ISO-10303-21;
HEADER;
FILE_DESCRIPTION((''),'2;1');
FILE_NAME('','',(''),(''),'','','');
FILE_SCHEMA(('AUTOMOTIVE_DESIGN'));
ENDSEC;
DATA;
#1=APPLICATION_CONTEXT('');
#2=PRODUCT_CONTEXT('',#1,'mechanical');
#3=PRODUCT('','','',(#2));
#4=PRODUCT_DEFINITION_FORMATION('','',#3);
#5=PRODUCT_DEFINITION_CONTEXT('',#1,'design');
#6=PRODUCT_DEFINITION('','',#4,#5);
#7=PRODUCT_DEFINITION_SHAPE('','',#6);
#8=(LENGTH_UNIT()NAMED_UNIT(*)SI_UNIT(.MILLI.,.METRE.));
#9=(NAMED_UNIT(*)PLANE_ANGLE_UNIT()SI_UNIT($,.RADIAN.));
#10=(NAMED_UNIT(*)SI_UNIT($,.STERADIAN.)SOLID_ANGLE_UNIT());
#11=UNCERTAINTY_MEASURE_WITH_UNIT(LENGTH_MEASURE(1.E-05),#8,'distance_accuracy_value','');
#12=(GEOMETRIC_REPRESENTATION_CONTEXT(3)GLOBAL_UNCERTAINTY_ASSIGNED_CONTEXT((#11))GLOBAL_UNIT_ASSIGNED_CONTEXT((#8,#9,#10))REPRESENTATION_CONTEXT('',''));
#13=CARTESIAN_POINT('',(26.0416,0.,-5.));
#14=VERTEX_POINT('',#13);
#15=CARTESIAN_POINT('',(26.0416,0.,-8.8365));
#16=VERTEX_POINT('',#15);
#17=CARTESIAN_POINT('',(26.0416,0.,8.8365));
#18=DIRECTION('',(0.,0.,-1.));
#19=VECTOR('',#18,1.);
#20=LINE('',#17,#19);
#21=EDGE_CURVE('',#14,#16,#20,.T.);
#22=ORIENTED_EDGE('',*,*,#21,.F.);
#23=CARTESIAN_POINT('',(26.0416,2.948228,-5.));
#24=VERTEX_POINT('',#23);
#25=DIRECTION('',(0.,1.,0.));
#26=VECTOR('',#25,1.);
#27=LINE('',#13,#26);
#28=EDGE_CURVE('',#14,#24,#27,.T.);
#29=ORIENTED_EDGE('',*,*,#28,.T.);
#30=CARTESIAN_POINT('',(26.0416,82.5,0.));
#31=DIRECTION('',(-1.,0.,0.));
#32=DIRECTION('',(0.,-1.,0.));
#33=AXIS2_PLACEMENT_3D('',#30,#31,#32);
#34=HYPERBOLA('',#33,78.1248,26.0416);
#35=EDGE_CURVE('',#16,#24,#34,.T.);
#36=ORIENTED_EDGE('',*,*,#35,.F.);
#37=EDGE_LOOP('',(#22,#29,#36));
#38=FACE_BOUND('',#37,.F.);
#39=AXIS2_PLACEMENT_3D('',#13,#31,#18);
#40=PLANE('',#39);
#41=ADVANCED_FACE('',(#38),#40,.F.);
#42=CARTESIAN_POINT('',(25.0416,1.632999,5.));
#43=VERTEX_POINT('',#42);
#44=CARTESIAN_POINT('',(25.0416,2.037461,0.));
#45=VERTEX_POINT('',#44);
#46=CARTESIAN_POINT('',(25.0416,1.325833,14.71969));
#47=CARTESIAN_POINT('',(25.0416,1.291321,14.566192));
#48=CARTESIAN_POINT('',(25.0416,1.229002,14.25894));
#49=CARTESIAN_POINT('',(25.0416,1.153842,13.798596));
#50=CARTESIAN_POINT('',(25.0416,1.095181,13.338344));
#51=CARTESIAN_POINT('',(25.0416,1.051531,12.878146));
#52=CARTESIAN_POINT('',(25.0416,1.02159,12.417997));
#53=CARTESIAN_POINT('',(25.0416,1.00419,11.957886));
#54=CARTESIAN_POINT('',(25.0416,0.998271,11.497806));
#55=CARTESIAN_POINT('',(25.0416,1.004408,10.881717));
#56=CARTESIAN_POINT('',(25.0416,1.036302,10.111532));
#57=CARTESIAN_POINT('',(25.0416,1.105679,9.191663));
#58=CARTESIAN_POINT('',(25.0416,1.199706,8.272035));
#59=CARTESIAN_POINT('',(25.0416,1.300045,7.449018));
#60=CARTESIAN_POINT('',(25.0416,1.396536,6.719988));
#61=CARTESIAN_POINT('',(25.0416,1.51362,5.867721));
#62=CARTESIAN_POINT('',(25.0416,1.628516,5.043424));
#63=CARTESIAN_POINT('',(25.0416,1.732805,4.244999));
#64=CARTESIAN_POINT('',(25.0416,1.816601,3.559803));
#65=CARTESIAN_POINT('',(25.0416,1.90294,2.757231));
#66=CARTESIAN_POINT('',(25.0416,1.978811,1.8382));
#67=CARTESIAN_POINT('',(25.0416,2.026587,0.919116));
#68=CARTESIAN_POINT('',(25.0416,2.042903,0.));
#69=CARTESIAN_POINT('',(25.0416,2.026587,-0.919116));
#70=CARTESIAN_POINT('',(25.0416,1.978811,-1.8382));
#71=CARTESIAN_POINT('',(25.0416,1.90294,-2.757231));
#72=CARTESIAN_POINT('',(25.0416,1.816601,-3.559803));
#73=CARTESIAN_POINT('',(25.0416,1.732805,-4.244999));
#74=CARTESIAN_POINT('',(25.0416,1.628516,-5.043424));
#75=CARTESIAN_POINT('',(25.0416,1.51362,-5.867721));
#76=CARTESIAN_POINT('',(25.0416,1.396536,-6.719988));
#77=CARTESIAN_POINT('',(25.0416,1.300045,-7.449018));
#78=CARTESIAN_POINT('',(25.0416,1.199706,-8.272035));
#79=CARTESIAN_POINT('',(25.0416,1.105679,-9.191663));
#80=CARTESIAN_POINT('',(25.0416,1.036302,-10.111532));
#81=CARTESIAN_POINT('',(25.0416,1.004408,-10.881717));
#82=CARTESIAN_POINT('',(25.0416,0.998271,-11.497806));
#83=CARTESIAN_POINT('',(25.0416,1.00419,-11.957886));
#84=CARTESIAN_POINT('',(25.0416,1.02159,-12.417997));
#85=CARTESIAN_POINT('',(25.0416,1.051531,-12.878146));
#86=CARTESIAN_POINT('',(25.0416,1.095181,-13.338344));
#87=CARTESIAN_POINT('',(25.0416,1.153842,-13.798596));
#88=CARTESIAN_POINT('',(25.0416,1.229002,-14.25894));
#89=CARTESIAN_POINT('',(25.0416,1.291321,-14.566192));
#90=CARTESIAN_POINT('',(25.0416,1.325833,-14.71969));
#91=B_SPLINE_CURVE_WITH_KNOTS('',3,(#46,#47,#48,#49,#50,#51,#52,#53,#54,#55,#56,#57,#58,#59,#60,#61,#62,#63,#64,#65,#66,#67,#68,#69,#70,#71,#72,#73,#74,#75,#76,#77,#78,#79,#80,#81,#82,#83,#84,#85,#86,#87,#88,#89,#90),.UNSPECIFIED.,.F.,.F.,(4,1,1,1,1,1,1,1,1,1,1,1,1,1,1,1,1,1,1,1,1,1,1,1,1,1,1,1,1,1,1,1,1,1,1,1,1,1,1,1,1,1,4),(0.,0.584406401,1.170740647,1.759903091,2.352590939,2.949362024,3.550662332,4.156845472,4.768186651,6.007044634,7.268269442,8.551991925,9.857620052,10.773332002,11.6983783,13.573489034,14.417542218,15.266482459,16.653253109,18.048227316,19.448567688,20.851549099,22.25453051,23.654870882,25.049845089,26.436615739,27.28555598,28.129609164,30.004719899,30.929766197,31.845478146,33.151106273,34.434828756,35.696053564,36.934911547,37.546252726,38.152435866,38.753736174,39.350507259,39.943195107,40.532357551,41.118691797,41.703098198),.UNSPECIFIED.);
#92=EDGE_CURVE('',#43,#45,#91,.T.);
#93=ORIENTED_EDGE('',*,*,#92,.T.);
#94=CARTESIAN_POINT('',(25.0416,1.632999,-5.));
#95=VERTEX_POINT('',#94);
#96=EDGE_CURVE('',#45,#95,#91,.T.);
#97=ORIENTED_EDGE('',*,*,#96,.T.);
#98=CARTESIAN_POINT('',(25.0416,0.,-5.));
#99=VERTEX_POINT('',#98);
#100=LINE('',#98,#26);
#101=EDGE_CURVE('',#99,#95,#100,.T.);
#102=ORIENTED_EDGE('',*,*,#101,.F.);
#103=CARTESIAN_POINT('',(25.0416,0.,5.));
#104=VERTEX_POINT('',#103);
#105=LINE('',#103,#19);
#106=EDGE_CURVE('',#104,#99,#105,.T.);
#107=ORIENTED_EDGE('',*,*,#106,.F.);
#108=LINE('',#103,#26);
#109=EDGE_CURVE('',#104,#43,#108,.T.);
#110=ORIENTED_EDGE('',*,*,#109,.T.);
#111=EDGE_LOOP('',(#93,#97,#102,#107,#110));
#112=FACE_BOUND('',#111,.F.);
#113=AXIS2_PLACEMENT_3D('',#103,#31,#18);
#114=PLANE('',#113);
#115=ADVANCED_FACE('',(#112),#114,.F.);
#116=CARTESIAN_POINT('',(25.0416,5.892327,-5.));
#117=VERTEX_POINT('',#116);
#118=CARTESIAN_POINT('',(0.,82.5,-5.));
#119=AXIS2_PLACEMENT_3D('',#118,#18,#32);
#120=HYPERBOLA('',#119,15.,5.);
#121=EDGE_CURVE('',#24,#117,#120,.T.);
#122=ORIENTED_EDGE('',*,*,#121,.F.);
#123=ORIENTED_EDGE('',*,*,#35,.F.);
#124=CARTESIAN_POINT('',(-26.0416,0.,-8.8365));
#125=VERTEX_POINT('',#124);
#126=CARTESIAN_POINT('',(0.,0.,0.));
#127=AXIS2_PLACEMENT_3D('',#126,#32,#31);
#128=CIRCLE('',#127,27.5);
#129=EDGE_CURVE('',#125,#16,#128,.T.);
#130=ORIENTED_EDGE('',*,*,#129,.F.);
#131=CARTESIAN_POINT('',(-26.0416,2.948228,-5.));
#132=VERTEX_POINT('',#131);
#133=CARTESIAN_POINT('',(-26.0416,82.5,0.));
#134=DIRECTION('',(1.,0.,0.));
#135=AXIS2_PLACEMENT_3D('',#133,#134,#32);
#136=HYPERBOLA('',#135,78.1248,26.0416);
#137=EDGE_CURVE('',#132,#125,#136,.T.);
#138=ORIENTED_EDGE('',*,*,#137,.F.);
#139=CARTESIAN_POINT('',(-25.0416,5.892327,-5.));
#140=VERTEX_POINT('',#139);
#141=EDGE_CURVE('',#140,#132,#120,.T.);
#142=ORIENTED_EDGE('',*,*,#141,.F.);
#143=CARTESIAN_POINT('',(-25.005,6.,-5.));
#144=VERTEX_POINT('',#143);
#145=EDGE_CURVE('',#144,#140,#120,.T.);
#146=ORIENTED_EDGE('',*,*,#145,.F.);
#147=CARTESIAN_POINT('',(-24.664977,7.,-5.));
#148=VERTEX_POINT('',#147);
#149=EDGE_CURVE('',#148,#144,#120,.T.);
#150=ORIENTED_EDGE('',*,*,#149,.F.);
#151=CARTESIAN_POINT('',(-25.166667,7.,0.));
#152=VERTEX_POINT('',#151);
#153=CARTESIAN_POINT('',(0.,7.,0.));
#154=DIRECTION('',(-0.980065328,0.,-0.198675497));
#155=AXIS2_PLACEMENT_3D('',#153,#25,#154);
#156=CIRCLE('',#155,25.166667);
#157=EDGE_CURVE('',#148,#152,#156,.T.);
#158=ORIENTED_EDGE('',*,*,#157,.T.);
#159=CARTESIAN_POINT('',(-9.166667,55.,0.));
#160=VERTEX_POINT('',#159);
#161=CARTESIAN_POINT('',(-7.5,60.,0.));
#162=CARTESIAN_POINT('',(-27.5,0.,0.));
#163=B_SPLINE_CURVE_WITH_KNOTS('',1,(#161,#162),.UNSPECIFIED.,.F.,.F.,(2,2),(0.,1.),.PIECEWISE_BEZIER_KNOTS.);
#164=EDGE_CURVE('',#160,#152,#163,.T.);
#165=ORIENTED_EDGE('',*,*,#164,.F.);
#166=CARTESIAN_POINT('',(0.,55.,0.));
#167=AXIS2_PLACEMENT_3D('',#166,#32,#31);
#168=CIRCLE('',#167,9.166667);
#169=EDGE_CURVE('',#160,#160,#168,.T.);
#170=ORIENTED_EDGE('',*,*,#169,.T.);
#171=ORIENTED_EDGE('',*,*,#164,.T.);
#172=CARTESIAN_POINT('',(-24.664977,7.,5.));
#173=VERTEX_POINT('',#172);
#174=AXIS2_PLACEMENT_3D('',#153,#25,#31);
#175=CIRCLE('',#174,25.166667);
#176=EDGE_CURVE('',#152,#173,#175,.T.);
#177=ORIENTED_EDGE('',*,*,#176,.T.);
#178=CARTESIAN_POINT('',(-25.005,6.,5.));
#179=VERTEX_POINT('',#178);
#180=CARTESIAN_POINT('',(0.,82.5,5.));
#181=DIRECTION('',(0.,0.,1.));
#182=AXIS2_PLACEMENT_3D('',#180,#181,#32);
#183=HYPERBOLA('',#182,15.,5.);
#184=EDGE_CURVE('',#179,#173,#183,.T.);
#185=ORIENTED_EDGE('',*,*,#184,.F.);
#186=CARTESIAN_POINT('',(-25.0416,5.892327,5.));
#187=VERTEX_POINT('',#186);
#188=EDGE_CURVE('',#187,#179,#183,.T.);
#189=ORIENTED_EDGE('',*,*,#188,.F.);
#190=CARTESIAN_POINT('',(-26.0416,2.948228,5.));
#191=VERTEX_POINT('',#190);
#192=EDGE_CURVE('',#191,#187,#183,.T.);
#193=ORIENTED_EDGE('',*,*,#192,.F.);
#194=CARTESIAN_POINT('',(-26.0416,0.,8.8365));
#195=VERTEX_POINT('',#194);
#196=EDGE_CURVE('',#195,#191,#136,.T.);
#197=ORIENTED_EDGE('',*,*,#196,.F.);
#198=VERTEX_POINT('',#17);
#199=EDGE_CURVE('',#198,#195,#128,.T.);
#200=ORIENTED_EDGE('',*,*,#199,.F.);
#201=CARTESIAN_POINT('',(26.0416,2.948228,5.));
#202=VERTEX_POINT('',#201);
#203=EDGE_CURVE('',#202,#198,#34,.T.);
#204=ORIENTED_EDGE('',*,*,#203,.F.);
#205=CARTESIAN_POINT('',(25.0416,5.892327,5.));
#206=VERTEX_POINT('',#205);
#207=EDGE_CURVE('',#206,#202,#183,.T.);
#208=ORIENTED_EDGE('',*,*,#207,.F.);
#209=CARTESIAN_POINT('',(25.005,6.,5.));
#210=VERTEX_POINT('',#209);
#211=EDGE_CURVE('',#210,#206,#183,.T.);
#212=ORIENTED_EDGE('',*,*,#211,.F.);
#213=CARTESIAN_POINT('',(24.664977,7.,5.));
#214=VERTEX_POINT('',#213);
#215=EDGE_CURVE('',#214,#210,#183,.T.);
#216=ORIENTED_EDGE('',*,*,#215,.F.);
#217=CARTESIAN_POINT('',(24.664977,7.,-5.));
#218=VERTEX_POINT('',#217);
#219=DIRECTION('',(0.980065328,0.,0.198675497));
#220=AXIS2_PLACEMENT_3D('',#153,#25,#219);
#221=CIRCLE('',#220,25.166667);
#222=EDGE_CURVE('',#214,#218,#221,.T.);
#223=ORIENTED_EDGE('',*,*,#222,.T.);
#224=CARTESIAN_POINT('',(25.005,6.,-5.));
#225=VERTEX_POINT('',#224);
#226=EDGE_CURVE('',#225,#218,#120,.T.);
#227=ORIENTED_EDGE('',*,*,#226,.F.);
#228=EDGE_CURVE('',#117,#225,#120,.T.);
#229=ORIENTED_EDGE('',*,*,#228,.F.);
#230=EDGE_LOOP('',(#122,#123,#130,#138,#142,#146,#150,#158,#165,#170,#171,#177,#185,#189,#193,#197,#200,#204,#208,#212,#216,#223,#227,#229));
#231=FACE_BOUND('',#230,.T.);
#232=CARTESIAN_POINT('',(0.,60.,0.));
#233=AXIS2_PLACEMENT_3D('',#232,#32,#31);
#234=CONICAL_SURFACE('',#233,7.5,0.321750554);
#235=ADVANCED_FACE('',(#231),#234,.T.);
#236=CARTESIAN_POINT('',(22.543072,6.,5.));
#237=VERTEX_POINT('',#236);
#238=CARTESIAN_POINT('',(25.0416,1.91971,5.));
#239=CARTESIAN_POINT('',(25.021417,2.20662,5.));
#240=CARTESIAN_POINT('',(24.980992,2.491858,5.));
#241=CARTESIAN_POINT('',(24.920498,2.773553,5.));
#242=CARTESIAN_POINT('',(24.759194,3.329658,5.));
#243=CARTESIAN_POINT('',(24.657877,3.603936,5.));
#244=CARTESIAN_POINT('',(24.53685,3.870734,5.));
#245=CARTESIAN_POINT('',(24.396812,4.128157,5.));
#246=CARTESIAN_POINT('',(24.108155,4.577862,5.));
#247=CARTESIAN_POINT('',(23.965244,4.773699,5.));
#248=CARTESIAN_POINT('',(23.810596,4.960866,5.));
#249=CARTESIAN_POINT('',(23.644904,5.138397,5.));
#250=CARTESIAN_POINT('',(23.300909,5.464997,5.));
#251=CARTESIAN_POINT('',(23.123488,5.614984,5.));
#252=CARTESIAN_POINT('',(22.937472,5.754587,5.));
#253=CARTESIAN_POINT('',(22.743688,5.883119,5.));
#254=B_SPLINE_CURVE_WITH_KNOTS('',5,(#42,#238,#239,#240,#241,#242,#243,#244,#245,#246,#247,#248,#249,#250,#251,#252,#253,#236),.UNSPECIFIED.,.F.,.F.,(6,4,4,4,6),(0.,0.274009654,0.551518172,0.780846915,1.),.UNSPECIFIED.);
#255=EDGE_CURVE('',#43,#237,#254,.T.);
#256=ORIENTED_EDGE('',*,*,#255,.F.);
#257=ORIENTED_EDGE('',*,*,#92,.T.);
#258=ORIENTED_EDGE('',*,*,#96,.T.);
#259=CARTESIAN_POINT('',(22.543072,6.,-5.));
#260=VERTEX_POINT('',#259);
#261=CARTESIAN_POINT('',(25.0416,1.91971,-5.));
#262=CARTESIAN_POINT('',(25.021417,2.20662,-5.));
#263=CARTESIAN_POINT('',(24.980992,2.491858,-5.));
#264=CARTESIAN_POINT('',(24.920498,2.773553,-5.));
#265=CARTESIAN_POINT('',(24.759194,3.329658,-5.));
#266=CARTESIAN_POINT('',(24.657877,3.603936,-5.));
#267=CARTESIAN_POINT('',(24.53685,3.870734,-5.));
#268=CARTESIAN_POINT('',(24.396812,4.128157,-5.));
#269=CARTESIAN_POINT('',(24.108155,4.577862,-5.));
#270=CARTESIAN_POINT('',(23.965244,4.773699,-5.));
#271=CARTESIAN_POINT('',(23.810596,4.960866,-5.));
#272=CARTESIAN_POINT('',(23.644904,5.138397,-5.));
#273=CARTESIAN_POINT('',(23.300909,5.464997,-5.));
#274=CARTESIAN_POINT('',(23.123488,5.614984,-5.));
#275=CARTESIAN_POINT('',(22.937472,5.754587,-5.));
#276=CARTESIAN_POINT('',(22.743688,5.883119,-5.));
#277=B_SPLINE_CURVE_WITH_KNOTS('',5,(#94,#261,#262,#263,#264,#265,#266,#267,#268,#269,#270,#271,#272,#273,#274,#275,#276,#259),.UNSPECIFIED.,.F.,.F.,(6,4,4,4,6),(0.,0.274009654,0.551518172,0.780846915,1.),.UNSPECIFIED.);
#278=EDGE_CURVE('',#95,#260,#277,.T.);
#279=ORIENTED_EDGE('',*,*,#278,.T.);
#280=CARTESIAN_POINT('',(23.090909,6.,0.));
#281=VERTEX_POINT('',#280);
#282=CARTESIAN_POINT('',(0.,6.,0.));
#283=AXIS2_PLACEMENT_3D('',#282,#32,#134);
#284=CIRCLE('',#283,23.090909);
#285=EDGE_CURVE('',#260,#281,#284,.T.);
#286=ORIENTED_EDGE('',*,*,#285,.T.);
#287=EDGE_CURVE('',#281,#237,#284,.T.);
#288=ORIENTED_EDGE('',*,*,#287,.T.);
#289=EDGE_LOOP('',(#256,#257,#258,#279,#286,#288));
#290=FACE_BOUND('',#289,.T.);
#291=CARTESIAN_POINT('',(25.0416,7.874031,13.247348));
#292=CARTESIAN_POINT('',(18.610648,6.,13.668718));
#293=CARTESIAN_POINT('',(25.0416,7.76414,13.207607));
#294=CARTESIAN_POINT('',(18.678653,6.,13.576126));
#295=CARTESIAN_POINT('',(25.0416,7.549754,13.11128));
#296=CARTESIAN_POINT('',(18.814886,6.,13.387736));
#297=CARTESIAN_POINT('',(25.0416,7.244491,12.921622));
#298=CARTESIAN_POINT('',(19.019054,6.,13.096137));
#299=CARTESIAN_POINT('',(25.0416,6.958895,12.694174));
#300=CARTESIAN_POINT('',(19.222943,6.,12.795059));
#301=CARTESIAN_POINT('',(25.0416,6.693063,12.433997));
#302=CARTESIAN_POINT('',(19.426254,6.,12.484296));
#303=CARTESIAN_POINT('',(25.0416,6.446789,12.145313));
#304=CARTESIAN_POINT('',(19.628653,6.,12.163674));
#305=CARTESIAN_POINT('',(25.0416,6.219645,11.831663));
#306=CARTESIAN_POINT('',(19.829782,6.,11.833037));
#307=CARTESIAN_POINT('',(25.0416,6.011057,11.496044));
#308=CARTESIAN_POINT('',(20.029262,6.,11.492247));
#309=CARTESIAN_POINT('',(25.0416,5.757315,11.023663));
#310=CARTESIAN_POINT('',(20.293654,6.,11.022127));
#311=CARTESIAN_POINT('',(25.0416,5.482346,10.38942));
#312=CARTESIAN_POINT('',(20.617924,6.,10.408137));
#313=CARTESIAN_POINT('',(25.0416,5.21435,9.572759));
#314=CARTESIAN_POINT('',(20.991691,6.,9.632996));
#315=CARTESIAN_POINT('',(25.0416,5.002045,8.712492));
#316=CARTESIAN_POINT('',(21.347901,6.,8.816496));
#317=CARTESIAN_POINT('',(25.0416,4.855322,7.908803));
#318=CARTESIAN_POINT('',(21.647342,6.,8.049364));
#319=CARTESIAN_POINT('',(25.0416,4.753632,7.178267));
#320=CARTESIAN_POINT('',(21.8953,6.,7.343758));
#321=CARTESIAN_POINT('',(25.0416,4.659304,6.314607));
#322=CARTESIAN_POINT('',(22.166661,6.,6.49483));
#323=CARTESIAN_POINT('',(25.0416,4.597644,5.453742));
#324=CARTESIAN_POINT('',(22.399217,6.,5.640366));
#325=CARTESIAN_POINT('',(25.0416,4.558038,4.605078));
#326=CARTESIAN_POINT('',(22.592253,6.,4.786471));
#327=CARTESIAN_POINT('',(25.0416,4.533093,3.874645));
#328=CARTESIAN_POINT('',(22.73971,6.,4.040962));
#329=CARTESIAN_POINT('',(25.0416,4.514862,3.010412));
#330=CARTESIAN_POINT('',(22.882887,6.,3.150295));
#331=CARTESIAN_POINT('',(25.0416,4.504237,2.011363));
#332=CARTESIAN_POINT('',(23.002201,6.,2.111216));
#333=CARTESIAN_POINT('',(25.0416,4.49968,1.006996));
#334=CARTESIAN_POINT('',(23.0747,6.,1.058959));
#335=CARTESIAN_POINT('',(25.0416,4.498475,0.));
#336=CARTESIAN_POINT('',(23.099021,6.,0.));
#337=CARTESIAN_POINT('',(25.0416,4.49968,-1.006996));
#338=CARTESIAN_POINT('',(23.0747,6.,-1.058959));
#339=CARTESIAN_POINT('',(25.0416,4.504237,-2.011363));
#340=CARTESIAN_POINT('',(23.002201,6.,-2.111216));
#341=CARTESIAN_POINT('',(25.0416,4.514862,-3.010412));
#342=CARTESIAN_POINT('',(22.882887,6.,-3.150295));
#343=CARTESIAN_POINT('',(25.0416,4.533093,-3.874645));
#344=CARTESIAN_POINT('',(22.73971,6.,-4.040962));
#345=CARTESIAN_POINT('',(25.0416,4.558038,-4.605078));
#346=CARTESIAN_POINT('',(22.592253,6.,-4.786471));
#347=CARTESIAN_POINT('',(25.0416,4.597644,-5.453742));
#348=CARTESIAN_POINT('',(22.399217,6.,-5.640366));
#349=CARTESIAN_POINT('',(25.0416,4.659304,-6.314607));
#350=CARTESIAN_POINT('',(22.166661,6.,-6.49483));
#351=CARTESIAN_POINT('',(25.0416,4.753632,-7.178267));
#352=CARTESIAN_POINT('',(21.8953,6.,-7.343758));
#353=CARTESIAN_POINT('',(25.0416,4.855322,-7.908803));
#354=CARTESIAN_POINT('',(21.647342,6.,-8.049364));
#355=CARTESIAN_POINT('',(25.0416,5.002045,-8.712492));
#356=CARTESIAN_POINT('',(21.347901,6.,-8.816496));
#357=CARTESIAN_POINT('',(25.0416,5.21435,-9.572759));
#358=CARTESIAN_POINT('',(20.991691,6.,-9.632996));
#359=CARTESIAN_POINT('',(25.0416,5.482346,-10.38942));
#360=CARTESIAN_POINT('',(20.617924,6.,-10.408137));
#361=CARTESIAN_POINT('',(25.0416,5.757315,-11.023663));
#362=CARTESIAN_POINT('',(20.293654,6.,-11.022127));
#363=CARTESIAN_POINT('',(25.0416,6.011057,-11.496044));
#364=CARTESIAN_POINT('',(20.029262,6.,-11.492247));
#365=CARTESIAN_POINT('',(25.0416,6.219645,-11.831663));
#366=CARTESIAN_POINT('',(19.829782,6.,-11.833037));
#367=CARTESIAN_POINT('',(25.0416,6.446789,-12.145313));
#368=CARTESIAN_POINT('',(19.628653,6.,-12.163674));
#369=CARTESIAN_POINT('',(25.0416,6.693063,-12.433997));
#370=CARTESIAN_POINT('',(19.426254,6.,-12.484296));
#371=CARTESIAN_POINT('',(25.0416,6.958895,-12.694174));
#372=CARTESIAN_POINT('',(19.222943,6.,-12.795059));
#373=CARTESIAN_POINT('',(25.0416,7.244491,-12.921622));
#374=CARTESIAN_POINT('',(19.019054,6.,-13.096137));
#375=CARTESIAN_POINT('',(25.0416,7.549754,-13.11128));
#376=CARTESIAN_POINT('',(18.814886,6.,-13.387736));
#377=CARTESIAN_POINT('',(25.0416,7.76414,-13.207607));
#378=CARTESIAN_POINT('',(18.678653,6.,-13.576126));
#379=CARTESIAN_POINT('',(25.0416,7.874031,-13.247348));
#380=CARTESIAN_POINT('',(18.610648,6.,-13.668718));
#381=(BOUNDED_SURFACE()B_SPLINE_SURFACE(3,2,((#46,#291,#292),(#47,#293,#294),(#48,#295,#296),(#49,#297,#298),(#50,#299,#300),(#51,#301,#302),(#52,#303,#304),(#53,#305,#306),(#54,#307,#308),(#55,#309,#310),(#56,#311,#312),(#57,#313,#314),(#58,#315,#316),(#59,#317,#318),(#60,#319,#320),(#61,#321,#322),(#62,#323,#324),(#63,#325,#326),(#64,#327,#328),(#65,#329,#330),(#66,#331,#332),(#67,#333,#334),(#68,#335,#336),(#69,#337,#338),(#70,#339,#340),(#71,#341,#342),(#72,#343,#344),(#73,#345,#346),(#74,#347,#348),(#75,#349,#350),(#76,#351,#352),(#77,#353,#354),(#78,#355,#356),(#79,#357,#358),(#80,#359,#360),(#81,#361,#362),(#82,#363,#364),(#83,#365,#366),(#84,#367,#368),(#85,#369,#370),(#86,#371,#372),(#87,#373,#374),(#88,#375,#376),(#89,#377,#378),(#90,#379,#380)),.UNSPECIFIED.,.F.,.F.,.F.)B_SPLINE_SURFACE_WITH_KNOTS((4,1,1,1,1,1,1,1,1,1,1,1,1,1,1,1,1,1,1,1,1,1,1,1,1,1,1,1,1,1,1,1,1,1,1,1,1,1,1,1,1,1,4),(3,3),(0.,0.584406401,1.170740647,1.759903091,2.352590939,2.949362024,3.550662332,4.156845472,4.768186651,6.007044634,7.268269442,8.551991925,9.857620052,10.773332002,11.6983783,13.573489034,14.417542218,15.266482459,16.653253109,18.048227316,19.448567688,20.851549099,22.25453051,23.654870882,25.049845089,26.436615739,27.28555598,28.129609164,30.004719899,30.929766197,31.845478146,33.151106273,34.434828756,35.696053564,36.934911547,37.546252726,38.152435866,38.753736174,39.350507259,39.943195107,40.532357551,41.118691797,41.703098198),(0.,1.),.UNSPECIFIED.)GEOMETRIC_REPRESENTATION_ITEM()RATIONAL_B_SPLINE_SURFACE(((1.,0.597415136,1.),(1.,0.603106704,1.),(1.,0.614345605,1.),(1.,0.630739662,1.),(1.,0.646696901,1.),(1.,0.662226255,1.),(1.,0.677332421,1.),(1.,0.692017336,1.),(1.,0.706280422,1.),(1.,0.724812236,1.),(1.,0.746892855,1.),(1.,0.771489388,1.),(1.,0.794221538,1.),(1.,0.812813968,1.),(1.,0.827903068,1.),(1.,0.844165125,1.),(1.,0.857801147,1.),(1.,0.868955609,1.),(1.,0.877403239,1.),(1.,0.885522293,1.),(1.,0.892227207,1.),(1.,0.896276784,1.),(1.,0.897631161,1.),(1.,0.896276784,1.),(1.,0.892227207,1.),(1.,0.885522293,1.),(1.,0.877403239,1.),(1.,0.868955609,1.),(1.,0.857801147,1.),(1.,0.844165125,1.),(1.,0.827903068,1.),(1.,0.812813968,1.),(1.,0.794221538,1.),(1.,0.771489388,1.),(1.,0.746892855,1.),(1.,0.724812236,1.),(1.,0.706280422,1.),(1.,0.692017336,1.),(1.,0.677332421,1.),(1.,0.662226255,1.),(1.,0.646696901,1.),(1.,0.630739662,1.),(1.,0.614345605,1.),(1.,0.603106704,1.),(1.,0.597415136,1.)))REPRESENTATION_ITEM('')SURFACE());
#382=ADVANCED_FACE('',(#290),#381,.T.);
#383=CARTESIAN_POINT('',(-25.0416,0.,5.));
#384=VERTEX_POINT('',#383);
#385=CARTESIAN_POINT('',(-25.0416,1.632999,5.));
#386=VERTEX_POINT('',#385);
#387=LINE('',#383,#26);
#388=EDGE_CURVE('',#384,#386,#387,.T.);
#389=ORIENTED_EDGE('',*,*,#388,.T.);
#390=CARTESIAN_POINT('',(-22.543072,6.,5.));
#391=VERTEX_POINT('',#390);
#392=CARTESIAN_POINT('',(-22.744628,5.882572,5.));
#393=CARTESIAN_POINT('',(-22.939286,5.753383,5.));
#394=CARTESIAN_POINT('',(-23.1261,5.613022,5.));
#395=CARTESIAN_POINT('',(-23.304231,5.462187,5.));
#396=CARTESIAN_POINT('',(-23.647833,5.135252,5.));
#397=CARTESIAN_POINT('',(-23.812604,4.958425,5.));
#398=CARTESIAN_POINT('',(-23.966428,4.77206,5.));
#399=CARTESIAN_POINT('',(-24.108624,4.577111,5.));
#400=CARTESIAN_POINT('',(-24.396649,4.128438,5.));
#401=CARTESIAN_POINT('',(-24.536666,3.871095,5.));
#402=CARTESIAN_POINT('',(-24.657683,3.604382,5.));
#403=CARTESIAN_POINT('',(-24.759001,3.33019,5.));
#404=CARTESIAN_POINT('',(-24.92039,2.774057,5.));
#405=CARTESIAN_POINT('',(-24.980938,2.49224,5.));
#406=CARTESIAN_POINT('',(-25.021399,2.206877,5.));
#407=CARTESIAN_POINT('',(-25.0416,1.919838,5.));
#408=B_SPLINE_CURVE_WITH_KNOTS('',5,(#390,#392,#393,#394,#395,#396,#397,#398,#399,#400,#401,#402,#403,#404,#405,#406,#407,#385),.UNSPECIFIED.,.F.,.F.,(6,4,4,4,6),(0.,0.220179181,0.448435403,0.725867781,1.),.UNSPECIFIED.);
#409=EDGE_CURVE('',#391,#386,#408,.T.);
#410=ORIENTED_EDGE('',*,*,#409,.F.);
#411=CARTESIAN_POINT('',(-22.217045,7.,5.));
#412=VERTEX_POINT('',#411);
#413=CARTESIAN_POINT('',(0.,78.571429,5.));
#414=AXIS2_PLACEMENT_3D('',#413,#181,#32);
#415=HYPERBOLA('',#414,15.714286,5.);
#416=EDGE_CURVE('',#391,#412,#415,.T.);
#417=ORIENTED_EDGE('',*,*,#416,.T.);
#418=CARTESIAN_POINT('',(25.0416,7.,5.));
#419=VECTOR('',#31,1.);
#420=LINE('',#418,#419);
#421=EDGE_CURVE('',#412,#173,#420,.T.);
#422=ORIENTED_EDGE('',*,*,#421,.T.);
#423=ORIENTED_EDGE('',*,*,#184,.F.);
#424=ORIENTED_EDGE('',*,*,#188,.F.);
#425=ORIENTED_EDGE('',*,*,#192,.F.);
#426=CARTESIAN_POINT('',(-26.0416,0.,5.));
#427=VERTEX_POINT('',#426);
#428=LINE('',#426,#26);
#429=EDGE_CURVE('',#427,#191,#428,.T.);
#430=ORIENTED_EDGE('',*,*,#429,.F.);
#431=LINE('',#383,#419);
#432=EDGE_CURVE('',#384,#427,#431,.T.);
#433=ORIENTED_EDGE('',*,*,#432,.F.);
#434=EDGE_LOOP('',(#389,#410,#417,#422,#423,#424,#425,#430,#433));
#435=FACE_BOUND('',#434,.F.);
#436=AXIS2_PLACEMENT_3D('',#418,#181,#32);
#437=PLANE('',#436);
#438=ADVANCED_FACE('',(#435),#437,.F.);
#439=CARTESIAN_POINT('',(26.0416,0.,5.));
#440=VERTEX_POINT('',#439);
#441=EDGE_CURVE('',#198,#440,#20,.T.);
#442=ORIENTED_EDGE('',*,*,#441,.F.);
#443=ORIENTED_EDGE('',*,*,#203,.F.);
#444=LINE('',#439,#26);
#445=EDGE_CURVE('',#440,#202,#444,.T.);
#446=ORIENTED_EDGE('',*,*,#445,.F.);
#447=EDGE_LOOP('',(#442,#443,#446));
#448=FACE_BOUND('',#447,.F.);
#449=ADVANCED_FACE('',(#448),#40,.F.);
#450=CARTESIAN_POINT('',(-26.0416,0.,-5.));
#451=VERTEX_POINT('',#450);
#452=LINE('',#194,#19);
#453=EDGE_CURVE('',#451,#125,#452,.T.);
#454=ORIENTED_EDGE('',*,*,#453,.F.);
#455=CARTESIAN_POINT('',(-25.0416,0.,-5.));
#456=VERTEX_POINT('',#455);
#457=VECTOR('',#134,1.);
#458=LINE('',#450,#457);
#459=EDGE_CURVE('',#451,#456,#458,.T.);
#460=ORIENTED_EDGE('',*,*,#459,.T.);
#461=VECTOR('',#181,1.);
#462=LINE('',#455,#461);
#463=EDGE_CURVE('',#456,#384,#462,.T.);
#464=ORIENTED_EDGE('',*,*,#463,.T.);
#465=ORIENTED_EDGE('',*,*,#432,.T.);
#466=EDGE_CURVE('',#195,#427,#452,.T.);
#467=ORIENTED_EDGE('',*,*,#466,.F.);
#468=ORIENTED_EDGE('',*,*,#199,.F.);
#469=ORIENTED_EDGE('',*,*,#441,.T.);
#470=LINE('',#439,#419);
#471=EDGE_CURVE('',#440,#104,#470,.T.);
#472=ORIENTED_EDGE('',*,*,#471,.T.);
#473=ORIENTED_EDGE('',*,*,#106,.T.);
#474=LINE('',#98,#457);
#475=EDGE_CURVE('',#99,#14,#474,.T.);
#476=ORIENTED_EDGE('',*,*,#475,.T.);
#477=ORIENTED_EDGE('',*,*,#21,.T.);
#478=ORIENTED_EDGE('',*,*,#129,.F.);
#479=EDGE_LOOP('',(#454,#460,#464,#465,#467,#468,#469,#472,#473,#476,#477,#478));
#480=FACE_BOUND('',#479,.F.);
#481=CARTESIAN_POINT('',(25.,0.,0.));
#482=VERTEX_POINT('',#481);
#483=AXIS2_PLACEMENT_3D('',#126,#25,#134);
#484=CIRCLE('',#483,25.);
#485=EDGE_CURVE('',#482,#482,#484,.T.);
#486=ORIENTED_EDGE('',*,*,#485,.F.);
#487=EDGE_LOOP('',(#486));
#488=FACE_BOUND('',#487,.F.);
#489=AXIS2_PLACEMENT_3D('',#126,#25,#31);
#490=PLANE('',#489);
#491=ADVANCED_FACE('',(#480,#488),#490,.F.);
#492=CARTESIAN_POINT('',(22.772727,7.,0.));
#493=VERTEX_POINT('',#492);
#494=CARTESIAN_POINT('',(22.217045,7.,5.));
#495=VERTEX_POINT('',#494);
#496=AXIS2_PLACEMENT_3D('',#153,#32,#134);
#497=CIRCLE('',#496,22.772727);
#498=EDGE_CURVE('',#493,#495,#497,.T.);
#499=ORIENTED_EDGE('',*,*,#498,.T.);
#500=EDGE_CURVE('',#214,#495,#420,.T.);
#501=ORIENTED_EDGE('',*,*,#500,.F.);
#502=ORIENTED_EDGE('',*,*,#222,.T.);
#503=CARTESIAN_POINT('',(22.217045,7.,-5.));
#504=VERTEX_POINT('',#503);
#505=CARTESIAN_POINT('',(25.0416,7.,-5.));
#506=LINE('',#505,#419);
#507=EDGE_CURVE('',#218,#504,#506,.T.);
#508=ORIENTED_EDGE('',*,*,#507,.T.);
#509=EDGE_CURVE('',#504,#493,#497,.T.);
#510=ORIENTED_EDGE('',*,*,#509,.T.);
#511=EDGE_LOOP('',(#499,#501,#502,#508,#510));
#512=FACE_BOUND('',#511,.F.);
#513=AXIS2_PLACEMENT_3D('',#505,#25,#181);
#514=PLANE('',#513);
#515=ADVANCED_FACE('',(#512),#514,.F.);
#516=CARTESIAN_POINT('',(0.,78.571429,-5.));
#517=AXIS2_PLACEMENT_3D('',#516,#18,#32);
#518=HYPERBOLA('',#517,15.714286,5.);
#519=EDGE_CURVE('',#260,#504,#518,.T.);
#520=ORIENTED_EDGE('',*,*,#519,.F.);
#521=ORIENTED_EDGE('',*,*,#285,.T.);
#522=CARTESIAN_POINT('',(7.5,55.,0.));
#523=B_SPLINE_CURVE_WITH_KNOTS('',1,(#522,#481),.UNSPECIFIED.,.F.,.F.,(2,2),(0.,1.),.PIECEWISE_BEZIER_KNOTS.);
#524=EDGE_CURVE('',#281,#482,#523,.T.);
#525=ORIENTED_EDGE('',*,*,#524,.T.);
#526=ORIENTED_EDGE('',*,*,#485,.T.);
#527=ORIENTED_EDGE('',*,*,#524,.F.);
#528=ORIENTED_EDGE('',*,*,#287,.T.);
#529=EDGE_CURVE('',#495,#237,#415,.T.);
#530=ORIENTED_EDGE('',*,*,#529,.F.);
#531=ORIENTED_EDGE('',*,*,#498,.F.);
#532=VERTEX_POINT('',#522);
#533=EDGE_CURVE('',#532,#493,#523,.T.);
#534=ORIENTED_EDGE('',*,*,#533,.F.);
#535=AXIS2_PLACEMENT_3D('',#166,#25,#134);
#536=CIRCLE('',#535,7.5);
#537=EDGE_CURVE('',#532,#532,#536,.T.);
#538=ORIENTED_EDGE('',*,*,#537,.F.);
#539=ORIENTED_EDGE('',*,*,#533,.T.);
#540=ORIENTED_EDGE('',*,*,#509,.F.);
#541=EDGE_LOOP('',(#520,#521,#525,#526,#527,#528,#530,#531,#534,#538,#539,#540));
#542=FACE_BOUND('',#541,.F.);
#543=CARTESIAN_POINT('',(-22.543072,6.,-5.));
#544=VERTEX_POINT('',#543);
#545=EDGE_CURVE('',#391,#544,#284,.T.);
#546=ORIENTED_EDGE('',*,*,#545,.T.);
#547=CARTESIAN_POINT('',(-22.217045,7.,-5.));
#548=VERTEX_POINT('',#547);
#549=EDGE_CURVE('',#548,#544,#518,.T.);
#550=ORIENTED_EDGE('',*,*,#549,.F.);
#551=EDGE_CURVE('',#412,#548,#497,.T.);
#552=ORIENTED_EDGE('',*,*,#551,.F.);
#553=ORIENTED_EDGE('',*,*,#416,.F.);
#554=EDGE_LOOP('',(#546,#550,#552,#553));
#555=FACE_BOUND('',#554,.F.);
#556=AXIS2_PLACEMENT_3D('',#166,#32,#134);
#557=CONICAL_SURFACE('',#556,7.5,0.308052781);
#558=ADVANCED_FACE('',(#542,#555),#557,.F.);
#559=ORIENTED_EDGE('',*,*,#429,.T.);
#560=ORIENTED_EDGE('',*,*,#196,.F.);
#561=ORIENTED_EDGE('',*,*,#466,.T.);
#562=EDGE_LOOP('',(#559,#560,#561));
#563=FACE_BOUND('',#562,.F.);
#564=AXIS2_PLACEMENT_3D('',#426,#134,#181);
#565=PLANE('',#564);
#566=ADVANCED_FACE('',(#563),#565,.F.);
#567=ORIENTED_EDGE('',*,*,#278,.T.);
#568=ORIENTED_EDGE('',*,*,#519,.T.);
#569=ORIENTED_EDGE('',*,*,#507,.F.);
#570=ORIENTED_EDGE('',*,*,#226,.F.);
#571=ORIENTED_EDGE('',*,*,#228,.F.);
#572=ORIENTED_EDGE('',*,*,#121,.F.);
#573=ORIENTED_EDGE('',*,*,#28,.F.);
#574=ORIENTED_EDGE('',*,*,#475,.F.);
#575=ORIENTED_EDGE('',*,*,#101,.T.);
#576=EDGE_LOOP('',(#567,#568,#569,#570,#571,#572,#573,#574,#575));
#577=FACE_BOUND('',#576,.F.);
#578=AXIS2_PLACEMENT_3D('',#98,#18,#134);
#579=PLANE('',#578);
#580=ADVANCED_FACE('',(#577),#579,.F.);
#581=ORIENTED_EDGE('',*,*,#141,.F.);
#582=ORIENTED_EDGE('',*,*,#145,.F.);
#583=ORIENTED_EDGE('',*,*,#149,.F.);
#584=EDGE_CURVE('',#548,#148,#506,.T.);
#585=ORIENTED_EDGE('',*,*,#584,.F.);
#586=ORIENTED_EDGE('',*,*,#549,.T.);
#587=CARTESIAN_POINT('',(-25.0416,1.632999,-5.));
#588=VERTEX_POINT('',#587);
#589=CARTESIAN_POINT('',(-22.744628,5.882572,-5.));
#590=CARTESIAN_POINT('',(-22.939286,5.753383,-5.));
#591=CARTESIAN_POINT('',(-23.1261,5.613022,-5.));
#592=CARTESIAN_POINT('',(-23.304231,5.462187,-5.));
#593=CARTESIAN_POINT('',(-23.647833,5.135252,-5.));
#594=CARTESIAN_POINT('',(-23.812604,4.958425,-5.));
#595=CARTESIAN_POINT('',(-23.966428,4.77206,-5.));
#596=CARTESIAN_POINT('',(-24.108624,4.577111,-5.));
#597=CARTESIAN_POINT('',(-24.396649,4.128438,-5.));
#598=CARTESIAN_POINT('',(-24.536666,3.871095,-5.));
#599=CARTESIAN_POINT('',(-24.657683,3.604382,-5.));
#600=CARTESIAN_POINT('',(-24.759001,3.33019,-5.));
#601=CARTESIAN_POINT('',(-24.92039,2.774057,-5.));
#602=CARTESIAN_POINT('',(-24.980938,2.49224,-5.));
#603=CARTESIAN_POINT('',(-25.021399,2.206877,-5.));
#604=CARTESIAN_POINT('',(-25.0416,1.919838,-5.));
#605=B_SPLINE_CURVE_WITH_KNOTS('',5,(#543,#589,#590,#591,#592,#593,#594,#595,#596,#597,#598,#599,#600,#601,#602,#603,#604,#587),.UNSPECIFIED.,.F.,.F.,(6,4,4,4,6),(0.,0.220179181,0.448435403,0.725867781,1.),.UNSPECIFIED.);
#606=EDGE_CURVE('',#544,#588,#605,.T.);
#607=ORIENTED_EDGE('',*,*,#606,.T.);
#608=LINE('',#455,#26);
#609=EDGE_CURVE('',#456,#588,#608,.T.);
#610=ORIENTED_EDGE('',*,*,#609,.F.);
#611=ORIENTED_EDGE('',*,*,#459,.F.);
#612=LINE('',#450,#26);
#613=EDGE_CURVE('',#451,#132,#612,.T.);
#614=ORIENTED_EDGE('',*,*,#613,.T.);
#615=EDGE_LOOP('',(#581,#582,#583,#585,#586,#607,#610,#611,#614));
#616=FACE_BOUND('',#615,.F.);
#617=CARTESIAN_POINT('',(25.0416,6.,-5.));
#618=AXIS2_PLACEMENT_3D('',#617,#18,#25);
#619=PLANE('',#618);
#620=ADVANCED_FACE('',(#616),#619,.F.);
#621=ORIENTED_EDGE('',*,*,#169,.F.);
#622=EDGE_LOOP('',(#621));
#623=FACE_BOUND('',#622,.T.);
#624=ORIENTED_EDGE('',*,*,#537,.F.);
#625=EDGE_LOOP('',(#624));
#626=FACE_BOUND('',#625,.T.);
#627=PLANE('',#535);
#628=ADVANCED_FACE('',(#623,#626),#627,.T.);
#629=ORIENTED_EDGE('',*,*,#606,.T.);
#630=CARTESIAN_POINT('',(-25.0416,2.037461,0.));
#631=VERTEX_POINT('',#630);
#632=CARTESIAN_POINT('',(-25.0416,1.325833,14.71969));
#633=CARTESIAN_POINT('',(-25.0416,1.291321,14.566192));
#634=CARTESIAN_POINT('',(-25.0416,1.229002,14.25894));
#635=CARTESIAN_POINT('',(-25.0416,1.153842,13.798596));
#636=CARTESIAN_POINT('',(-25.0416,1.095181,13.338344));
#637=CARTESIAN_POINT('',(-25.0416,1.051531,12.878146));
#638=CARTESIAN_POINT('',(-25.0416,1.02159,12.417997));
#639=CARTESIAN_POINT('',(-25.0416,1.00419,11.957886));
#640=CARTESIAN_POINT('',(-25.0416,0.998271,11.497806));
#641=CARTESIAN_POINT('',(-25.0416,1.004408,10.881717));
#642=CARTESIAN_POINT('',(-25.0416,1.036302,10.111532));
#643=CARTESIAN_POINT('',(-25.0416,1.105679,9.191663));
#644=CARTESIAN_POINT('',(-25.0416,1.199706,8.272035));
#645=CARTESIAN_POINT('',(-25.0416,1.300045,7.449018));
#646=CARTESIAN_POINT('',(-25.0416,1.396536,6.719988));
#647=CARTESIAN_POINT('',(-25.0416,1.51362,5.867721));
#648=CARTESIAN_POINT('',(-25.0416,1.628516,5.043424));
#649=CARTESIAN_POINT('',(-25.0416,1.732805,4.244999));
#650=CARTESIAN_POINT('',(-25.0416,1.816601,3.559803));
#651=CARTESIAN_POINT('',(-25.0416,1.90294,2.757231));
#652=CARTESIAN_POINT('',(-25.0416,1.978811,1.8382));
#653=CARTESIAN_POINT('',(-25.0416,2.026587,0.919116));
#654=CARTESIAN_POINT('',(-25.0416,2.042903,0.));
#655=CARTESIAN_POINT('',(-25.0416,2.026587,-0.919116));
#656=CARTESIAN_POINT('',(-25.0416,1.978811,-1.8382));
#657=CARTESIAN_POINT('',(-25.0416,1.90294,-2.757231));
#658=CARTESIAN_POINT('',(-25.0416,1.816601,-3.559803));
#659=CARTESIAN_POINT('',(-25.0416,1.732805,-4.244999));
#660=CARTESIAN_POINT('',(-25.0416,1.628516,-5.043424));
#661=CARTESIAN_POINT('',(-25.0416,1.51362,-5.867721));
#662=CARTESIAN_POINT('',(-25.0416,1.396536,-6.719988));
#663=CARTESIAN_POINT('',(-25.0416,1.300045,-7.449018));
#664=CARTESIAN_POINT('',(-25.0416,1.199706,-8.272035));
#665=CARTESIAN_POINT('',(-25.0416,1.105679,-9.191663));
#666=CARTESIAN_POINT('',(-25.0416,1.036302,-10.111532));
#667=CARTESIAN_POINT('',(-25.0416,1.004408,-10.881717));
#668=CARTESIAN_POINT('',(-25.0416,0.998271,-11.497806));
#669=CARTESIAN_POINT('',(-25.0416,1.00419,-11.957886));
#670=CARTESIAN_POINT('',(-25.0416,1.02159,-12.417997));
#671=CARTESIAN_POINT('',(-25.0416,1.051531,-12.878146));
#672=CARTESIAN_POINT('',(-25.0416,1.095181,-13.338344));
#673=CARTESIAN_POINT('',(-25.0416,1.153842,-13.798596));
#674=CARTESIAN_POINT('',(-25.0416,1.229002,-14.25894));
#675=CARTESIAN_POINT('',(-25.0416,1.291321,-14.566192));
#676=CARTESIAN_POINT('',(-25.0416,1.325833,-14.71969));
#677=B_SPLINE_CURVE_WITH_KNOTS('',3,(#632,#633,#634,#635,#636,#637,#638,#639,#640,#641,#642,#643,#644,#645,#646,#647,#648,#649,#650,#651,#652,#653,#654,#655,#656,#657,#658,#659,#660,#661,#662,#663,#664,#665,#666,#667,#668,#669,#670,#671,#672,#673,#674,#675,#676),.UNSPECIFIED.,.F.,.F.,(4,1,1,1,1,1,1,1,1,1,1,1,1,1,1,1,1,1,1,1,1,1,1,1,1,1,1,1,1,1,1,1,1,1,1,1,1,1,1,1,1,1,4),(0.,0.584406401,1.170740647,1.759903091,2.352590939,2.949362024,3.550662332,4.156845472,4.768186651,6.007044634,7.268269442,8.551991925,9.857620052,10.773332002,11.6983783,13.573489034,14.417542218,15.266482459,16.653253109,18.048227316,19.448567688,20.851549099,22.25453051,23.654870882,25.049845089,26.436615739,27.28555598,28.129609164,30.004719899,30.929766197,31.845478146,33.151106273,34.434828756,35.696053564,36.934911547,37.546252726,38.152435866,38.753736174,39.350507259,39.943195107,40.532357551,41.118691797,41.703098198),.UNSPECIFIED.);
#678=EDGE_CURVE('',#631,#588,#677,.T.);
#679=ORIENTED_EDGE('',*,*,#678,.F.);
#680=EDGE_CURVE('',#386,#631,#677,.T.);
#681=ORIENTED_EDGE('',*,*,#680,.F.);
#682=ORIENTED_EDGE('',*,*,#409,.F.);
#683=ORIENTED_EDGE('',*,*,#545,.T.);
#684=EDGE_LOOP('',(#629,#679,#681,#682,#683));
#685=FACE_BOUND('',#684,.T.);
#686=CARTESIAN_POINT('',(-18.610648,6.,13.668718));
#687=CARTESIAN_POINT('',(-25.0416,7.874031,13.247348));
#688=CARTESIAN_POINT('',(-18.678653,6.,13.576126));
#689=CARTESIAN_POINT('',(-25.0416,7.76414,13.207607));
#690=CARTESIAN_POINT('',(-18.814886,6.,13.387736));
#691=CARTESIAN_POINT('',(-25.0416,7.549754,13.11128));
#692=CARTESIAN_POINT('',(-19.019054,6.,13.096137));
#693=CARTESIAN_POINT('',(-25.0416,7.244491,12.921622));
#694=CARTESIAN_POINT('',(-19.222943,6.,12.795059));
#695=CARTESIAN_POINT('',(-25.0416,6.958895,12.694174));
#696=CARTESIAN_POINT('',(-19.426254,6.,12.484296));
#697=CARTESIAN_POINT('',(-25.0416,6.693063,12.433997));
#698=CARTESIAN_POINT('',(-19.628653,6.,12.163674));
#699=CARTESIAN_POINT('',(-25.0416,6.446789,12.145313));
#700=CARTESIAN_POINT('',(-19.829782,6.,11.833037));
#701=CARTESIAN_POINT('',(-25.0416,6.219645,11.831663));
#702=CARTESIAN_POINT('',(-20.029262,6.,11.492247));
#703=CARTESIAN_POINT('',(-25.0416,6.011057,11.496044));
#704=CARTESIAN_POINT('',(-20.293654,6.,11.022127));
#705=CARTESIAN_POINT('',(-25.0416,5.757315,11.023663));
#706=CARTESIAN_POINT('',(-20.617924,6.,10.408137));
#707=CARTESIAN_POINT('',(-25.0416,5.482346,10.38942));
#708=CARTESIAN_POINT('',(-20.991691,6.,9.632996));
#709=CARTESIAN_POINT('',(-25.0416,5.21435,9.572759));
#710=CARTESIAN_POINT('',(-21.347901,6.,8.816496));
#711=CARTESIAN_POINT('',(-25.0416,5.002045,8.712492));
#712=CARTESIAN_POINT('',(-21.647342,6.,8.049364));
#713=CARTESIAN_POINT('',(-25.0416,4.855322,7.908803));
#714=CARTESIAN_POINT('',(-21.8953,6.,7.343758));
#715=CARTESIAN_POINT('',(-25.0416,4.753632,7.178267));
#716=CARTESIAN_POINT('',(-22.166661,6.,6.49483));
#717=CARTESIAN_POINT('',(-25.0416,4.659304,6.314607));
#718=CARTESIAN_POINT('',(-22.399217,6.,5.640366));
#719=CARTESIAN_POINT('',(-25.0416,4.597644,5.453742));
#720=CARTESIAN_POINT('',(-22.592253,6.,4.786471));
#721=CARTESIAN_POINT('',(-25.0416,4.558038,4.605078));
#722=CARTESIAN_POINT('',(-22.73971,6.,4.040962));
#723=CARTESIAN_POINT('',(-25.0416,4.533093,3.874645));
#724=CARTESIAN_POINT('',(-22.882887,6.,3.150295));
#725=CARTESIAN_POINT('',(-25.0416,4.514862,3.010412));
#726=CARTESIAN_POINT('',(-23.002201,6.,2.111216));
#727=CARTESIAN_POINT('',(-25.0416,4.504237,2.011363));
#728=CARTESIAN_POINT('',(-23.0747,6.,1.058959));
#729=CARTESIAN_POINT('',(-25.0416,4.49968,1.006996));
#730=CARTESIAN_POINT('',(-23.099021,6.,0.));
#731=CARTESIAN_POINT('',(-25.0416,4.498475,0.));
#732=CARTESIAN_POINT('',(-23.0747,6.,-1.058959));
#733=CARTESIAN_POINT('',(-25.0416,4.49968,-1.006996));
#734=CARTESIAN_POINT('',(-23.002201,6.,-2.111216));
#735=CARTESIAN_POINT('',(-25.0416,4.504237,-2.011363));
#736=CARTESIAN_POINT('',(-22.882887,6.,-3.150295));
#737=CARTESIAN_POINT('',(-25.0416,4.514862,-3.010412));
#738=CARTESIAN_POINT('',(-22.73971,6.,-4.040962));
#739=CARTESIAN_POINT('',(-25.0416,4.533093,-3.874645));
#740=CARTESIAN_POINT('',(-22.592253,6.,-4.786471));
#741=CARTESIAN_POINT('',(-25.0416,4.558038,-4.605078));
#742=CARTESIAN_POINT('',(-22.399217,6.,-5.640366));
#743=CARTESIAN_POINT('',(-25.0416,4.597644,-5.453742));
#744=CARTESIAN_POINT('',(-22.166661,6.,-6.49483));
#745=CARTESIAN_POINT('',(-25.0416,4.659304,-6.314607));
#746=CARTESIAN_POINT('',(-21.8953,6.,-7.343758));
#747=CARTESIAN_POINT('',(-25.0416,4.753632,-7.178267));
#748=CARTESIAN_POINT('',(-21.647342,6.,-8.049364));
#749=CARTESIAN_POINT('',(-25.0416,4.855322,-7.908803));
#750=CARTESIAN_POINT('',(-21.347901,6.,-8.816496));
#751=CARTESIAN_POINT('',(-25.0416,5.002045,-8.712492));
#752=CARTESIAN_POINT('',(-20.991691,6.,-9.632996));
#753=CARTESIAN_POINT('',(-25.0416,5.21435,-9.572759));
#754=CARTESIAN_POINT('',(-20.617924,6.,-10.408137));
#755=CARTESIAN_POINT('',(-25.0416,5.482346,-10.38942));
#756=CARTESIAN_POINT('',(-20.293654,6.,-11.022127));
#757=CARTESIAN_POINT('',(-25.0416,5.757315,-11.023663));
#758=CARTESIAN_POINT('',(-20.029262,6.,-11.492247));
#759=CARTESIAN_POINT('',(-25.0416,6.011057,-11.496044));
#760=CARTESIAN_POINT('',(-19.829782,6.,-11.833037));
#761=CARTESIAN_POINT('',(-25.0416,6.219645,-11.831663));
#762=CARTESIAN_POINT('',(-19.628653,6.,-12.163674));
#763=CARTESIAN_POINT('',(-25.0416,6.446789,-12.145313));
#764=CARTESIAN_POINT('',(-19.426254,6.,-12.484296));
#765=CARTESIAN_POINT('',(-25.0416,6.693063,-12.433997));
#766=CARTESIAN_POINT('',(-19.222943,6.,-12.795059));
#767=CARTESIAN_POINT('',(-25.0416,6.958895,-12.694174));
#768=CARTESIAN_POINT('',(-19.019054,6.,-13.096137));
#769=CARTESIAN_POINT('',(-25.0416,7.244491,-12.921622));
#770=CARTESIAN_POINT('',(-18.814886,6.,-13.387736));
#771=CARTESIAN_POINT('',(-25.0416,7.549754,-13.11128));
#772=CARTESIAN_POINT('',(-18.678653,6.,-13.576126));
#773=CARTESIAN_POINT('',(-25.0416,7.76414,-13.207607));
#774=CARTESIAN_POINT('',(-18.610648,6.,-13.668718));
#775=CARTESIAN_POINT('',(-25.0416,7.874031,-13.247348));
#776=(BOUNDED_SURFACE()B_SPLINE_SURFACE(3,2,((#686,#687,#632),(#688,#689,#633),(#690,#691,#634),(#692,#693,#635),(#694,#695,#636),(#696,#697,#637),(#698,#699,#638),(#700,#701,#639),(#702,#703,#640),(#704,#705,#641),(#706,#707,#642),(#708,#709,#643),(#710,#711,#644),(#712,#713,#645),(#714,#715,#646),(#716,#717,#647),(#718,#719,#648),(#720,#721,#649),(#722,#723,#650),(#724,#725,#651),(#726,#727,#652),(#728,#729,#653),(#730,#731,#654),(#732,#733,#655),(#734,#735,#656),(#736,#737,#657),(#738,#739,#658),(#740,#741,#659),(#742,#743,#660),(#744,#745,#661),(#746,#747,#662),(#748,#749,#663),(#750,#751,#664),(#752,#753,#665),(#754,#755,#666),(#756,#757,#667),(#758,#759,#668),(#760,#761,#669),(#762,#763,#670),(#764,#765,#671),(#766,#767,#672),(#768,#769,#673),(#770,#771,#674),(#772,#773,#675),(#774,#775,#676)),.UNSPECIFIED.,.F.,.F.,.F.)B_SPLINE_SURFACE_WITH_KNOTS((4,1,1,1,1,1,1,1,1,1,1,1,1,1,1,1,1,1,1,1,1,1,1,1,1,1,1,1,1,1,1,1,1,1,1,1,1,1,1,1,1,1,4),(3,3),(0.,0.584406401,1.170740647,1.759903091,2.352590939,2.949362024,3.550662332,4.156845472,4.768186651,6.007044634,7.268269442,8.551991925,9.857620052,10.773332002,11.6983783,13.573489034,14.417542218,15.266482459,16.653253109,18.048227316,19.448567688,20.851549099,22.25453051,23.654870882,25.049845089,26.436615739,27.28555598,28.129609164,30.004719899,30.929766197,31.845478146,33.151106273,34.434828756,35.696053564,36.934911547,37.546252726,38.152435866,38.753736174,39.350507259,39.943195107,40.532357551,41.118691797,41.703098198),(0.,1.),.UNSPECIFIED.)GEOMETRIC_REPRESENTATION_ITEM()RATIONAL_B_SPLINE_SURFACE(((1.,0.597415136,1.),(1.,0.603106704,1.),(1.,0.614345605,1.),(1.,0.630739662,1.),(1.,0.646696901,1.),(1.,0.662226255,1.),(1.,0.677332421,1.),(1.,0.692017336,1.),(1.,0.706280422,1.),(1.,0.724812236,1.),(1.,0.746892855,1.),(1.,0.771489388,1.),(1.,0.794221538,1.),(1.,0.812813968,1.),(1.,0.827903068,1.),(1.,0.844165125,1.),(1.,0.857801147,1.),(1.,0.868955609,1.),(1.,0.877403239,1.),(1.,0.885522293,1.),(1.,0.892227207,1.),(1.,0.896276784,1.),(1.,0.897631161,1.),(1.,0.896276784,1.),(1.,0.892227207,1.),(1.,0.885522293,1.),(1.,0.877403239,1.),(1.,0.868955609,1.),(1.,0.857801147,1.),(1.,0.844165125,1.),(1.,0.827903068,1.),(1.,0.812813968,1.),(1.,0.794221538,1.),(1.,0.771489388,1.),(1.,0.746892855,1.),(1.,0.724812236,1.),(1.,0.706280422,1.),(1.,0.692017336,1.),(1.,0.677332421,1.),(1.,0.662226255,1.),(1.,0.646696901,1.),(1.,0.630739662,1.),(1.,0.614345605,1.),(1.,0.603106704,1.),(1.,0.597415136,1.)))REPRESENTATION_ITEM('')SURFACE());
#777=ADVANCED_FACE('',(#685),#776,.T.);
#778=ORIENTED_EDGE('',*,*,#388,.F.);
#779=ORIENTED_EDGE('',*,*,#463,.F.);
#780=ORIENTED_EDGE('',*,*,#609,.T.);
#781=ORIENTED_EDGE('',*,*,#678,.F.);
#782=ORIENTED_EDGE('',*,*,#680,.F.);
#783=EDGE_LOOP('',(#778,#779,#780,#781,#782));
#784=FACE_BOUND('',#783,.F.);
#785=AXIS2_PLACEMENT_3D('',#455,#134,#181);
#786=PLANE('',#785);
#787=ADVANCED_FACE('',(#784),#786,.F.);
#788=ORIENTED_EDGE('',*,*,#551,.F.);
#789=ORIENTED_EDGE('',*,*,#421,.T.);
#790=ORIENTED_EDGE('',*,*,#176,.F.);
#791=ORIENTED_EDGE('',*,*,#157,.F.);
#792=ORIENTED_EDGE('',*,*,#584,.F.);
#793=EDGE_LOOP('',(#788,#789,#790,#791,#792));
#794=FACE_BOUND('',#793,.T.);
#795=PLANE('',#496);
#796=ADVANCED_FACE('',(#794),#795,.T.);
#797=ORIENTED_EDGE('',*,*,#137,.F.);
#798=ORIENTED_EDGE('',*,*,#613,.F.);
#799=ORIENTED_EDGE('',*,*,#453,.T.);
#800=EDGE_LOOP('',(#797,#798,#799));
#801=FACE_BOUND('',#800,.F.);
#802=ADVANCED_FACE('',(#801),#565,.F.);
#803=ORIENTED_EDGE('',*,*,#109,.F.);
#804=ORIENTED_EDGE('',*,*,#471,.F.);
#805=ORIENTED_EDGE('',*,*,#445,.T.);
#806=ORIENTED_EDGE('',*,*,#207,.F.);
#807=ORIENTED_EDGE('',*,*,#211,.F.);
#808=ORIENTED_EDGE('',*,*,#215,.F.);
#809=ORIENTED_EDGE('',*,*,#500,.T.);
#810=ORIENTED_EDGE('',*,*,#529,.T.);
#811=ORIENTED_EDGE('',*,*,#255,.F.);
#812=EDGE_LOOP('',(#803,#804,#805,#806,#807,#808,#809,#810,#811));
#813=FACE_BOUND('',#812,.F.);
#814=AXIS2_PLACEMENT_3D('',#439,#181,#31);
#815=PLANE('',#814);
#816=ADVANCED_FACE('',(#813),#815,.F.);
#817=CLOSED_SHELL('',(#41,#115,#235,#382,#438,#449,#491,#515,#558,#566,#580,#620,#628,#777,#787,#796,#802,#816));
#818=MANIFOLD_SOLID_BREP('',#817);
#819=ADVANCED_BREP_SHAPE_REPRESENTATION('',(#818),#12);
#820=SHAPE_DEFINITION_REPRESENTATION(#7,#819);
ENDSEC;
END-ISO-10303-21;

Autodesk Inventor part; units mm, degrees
ref_plane "YZ Plane" through (0, 0, 0) normal (1, 0, 0) x (0, 1, 0)
ref_plane "XZ Plane" through (0, 0, 0) normal (0, 1, 0) x (-1, 0, 0)
ref_plane "XY Plane" through (0, 0, 0) normal (0, 0, 1) x (1, 0, 0)
sketch "Sketch1" plane through (0, 0, 0) normal (0, 1, 0) x (-1, 0, 0)
  point P0 (0, 0)
sketch "Sketch2" plane through (0, 0, 0) normal (0, 1, 0) x (-1, 0, 0)
  circle A0 centre (0, 0) radius 7.5
  dimension "d0" = 15
extrude "Extrusion1" add sketch "Sketch2" along normal blind 60
sketch "Sketch3" plane through (0, 60, 0) normal (0, 1, 0) x (1, 0, 0)
  circle A0 centre (0, 0) radius 7.5
sketch "Sketch4" plane through (0, 0, 0) normal (0, -1, 0) x (1, 0, 0)
  circle A0 centre (0, 0) radius 25
  circle A1 centre (0, 0) radius 7.5 projected
  circle A2 centre (0, 0) radius 27.5
  dimension "d3" = 50
  dimension "d4" = 55
loft "Loft1" add profiles "Sketch4" section 1 edges at (7.5, 60, 0) contours A0 | A1 | A2
sketch "Sketch5" plane through (0, 0, 0) normal (0, -1, 0) x (1, 0, 0)
  circle A0 centre (0, 0) radius 7.5 projected
  circle A1 centre (0, 0) radius 27.5
  circle A2 centre (0, 0) radius 25
  circle A3 centre (0, 0) radius 7.5
  dimension "d9" = 50
  dimension "d10" = 15
sketch "Sketch6" plane through (0, 60, 0) normal (0, 1, 0) x (1, 0, 0)
  circle A0 centre (0, 0) radius 7.5
extrude "Extrusion2" cut sketch "Sketch6" against normal blind 5
sketch "Sketch7" plane through (0, 55, 0) normal (0, 1, 0) x (1, 0, 0)
  circle A0 centre (0, 0) radius 7.5
  line L0 (-11.197, -10.4421) -> (10.2744, -10.4421)
  line L1 (10.2744, -10.4421) -> (10.2744, 11.5325)
  line L2 (10.2744, 11.5325) -> (-11.197, 11.5325)
  line L3 (-11.197, 11.5325) -> (-11.197, -10.4421)
loft "Loft2" cut profiles "Sketch5" section 1 edges at (-7.5, 55, 0) contours A0 | A2
extrude "Extrusion3" cut sketch "Sketch7" along normal through all
sketch "Sketch8" plane through (0, 0, 0) normal (0, -1, 0) x (1, 0, 0)
  circle A0 centre (0, 0) radius 25
  circle A1 centre (0, 0) radius 27.5
  line L0 (27.5, 0) -> (27.5, -5)
  line L1 (27.0416, -5) -> (26.0416, -5)
  line L2 (26.0416, -5) -> (26.0416, 5)
  line L3 (26.0416, 5) -> (27.0416, 5)
  line L4 (27.0416, 5) -> (27.0416, -5)
  line L5 (-27.5, 0) -> (-27.5, -5)
  line L6 (-27.0416, -5) -> (-26.0416, -5)
  line L7 (-26.0416, -5) -> (-26.0416, 5)
  line L8 (-26.0416, 5) -> (-27.0416, 5)
  line L9 (-27.0416, 5) -> (-27.0416, -5)
  line L10 (26.0416, -5) -> (25.0416, -5)
  line L11 (25.0416, -5) -> (25.0416, 5)
  line L12 (25.0416, 5) -> (26.0416, 5)
  line L13 (26.0416, 5) -> (26.0416, -5)
  line L14 (-26.0416, -5) -> (-25.0416, -5)
  line L15 (-25.0416, -5) -> (-25.0416, 5)
  line L16 (-25.0416, 5) -> (-26.0416, 5)
  line L17 (-26.0416, 5) -> (-26.0416, -5)
  line L18 (-26.0416, 5) -> (-26.0416, 8.8365)
  line L19 (-26.0416, -5) -> (-26.0416, -8.8365)
  line L20 (26.0416, -5) -> (26.0416, -8.8365)
  line L21 (26.0416, 5) -> (26.0416, 8.8365)
  circle A2 centre (0, 0) radius 27.5 projected
  dimension "d19" = 5
  dimension "d20" = 1
  dimension "d21" = 10
  dimension "d22" = 5
  dimension "d23" = 1
  dimension "d24" = 10
  dimension "d25" = 1
  dimension "d26" = 1
extrude "Extrusion4" cut sketch "Sketch8" against normal through all contours A1 L4 | L3 L21 A1 | L4 L1 L2 L3 | A1 L20 L1 | L18 L8 A1 | A1 L6 L19 | L9 A1 | L8 L7 L6 L9
sketch "Sketch9" plane through (0, 0, 0) normal (0, -1, 0) x (1, 0, 0)
  circle A0 centre (0, 0) radius 27.5
  circle A1 centre (0, 0) radius 25
  line L0 (27.5, 0) -> (27.5, -5)
  line L1 (26.0416, -8.8365) -> (26.0416, 8.8365) projected
  line L2 (27.0416, -5) -> (26.0416, -5)
  line L3 (26.0416, -5) -> (26.0416, 5)
  line L4 (26.0416, 5) -> (27.0416, 5)
  line L5 (27.0416, 5) -> (27.0416, -5)
  line L6 (26.0416, 5) -> (25.0416, 5)
  line L7 (25.0416, 5) -> (25.0416, -5)
  line L8 (25.0416, -5) -> (26.0416, -5)
  line L9 (26.0416, -5) -> (26.0416, 5)
  line L10 (-27.5, 0) -> (-27.5, -5)
  line L11 (-26.0416, 8.8365) -> (-26.0416, -8.8365) projected
  line L12 (-27.0416, -5) -> (-26.0416, -5)
  line L13 (-26.0416, -5) -> (-26.0416, 5)
  line L14 (-26.0416, 5) -> (-27.0416, 5)
  line L15 (-27.0416, 5) -> (-27.0416, -5)
  line L16 (-26.0416, -5) -> (-25.0416, -5)
  line L17 (-25.0416, -5) -> (-25.0416, 5)
  line L18 (-25.0416, 5) -> (-26.0416, 5)
  line L19 (-26.0416, 5) -> (-26.0416, -5)
  dimension "d29" = 5
  dimension "d30" = 10
  dimension "d31" = 1
  dimension "d32" = 5
  dimension "d33" = 10
  dimension "d34" = 1
extrude "Extrusion5" cut sketch "Sketch9" against normal blind 7 contours L1 L8 L7 L6 | L18 L17 L16 L11
sketch "Sketch10" plane through (25.0416, 0, 5) normal (1, 0, 0) x (0, 0, -1)
  line L0 (0, 0) -> (10, 0)
  line L1 (10, 0) -> (10, 7)
  line L2 (10, 7) -> (0, 7)
  line L3 (0, 7) -> (0, 0)
  line L4 (10, 7) -> (0, 7)
  line L5 (0, 7) -> (0, 6)
  line L6 (0, 6) -> (10, 6)
  line L7 (10, 6) -> (10, 7)
  point P0 (5, 0)
  dimension "d37" = 10
  dimension "d38" = 7
  dimension "d39" = 1
extrude "Extrusion6" cut sketch "Sketch10" against normal through all contours L3 L2 L1 L6
fillet "Fillet1" radius 5 1 edges at (25.0416, 6, 0)
fillet "Fillet2" radius 5 1 edges at (-25.0416, 6, 0)
properties part number "cone_p2_testpart1"
